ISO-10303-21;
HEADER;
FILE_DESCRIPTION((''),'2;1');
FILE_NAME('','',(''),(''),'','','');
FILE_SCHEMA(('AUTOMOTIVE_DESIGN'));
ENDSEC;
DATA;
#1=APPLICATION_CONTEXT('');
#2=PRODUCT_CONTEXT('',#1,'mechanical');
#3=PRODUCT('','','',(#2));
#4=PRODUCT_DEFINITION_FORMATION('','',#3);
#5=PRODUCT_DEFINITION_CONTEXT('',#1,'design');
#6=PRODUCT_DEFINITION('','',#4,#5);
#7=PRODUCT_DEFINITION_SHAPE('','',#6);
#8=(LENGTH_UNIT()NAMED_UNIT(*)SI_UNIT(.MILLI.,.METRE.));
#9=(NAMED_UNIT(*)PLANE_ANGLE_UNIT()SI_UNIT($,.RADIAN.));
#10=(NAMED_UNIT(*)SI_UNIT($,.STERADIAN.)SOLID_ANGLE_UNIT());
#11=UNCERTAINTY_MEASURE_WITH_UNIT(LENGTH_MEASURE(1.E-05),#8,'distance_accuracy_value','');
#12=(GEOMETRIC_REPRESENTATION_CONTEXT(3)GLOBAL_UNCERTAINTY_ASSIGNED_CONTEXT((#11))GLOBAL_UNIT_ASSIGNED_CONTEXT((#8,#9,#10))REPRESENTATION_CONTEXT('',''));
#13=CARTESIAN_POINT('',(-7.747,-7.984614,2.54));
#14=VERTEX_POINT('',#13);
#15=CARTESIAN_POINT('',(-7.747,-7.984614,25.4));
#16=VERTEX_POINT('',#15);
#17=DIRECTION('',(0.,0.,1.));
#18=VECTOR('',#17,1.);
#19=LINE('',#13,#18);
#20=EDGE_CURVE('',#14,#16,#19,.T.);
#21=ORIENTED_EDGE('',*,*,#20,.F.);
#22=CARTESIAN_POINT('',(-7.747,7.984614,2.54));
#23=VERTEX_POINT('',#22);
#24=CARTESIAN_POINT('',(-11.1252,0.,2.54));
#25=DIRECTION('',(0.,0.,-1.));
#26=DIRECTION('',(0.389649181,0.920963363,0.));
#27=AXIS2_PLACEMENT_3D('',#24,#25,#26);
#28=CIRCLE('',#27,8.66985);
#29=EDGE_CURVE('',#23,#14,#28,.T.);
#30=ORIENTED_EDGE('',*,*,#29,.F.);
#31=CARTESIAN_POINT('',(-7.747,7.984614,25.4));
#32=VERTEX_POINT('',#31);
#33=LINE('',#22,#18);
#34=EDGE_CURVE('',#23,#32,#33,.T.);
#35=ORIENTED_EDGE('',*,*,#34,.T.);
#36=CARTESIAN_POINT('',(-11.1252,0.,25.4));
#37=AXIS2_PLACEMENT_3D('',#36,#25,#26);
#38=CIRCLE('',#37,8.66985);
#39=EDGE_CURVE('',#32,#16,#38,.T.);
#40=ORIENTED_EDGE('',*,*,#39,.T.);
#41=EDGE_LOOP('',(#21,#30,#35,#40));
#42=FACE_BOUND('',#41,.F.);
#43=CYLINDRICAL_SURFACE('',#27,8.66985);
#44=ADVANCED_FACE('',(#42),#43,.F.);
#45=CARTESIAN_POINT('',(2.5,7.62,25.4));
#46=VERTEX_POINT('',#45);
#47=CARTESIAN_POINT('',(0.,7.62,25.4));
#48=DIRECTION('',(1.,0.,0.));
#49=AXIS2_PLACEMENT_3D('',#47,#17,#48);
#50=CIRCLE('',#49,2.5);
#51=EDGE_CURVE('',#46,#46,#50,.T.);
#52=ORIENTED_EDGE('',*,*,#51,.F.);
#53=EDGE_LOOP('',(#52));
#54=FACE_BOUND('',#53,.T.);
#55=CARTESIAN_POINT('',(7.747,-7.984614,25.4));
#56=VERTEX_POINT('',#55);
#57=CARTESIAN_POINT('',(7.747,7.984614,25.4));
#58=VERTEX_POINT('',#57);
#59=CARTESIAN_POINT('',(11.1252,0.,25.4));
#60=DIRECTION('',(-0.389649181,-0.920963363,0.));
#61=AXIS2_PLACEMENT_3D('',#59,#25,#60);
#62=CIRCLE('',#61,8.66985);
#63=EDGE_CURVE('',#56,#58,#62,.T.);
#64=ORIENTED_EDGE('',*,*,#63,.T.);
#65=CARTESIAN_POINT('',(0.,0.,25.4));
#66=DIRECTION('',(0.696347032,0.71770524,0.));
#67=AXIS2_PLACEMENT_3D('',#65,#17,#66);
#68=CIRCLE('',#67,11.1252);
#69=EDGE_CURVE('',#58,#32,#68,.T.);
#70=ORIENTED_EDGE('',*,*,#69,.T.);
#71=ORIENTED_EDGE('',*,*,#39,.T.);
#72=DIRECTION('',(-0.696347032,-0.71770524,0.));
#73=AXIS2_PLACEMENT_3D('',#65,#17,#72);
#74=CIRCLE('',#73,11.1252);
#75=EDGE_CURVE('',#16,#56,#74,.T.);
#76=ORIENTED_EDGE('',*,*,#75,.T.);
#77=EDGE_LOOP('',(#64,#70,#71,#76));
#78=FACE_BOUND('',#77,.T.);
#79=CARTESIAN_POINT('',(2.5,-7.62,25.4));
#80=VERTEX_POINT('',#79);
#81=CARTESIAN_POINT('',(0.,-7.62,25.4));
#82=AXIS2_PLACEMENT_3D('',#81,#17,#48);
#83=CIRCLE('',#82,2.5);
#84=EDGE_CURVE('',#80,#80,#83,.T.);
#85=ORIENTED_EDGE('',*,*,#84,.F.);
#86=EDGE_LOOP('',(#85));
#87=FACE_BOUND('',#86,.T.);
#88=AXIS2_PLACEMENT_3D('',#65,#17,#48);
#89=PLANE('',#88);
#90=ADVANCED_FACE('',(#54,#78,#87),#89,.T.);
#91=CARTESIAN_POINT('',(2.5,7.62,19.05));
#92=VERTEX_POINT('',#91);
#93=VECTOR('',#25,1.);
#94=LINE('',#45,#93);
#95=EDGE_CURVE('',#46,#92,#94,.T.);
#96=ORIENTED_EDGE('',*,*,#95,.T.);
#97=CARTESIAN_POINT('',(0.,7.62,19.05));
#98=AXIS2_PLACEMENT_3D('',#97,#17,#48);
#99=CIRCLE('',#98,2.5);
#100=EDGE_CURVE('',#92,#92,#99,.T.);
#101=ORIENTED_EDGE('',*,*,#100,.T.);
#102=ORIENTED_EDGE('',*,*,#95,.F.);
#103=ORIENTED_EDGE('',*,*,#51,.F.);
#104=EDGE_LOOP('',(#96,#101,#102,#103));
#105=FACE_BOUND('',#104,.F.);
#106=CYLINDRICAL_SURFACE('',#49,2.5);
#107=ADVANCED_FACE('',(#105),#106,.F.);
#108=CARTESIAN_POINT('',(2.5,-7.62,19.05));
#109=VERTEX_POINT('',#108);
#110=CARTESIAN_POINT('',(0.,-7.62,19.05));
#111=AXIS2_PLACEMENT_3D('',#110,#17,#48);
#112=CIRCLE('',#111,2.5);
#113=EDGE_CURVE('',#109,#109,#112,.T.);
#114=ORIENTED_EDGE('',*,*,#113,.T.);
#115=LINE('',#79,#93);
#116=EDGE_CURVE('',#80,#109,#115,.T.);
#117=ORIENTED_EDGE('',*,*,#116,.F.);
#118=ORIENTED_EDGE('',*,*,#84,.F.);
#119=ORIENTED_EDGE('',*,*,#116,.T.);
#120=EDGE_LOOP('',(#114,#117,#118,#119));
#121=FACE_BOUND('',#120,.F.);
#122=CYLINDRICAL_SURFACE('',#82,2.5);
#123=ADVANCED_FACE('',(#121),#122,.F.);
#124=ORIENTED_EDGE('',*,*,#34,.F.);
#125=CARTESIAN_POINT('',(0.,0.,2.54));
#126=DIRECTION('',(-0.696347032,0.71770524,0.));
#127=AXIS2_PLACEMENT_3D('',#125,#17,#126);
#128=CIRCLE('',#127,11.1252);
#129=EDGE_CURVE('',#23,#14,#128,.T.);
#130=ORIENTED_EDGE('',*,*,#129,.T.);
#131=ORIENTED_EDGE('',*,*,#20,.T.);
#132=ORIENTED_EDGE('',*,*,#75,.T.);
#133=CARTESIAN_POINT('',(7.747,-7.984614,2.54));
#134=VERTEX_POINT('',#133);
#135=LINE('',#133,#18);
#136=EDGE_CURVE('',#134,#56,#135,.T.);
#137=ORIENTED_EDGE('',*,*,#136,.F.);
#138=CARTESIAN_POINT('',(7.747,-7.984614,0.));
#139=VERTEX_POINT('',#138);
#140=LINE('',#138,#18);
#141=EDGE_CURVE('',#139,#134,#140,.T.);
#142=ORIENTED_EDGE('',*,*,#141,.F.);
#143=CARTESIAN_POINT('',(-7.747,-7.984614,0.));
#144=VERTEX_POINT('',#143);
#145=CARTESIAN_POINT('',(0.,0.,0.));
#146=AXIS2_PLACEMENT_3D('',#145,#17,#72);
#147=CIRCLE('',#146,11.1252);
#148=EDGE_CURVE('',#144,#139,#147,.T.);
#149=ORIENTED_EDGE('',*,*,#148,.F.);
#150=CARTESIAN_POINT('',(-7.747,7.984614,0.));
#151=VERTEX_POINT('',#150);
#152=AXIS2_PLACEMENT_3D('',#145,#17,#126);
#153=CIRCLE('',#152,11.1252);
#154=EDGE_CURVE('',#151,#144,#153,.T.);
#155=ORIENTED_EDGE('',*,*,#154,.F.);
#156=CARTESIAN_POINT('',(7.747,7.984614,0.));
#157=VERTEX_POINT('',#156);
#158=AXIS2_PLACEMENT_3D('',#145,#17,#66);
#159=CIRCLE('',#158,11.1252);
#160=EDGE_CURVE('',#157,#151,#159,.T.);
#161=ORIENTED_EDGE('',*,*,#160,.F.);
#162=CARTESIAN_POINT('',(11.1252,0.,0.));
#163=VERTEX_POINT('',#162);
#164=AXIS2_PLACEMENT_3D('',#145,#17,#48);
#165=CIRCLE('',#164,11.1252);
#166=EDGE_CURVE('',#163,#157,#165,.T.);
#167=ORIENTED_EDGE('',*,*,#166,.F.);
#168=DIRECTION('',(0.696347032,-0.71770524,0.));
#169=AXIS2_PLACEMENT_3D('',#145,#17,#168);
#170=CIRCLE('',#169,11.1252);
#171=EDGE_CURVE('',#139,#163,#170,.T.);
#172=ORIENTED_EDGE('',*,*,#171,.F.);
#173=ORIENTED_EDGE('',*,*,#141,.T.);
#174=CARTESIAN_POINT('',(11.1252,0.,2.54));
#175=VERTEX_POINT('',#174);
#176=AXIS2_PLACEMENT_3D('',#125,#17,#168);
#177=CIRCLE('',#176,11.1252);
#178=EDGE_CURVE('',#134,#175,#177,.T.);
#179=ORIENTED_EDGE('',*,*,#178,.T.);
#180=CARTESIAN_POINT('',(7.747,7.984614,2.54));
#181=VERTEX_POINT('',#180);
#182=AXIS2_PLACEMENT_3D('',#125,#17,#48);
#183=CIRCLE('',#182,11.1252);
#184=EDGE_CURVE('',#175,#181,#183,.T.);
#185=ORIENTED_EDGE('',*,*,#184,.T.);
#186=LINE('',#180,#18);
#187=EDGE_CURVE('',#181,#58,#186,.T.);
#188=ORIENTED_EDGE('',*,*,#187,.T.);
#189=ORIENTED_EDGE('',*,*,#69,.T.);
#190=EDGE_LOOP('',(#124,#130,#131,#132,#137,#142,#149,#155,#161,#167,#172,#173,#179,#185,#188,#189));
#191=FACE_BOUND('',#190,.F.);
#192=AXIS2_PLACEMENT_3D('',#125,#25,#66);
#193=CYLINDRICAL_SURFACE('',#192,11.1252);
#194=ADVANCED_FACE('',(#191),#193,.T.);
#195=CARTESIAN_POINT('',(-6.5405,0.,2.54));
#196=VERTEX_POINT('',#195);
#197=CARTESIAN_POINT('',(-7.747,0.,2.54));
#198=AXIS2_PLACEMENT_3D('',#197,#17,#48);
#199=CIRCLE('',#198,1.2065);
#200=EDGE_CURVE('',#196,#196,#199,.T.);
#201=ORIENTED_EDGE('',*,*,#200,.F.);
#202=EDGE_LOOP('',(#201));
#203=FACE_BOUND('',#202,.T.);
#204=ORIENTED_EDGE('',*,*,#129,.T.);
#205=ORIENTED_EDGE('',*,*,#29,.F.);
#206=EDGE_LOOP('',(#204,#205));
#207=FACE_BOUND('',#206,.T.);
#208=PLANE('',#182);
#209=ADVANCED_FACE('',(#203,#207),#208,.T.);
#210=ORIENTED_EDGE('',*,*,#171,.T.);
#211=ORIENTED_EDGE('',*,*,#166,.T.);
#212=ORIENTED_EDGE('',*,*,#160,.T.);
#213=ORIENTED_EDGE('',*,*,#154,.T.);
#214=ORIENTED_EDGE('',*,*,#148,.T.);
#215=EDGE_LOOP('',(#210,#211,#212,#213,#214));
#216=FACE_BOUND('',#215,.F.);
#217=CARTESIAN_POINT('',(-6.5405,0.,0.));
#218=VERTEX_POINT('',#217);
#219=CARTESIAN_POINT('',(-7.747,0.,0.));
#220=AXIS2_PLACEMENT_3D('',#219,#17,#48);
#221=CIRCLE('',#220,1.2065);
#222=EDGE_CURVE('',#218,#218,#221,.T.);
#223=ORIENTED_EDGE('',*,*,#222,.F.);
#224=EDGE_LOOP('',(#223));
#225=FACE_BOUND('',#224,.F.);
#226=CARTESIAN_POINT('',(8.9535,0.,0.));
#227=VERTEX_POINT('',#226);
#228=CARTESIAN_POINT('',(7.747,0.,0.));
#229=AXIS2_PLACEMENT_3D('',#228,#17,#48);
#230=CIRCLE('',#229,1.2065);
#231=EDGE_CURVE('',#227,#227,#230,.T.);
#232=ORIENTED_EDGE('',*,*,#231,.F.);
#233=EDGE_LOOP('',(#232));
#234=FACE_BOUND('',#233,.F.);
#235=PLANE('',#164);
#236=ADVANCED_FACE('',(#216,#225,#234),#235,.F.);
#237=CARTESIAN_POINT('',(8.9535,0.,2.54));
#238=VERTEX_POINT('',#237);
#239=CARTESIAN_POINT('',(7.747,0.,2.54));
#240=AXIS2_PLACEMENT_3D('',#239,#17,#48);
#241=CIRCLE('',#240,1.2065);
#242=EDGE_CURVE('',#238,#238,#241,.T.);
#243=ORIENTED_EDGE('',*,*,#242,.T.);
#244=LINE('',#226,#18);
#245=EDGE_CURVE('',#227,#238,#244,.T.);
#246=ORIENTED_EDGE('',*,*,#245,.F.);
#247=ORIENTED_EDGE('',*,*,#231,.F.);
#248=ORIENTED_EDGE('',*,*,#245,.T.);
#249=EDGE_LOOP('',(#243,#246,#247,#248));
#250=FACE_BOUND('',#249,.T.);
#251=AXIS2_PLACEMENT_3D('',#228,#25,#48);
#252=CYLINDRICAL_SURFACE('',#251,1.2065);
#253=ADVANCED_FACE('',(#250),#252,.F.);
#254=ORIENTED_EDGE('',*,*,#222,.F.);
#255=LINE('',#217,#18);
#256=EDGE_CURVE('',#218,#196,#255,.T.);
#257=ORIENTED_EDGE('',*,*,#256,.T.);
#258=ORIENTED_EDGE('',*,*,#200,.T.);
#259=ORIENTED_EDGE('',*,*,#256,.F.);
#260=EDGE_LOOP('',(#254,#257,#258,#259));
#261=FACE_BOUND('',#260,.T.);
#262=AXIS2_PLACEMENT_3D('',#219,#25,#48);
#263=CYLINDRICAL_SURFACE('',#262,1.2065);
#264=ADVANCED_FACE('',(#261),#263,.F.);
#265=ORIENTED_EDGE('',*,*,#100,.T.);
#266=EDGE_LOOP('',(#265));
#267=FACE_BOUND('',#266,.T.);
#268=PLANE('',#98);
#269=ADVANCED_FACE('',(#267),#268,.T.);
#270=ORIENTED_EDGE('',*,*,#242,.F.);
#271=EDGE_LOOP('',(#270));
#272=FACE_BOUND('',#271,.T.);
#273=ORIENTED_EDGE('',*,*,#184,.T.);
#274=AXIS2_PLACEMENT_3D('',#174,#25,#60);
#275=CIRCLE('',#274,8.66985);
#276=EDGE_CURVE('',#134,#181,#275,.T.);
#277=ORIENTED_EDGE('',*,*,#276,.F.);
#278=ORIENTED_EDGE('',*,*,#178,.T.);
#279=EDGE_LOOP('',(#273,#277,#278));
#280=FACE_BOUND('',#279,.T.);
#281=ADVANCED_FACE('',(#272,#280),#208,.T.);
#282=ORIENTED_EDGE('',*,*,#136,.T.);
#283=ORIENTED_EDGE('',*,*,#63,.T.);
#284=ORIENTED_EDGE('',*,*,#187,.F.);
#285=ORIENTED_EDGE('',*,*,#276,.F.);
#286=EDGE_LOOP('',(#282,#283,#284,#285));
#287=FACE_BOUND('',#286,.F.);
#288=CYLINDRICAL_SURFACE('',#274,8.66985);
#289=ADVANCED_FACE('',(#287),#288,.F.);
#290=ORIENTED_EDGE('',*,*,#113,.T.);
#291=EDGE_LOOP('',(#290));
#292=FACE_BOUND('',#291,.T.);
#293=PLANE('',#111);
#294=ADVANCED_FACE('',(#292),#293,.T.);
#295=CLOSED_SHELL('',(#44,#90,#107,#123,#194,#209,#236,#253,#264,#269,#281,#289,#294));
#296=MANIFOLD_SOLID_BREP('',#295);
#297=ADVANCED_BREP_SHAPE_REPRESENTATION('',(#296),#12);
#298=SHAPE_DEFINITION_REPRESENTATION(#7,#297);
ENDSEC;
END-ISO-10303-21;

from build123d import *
from build123d import SkipClean  # not in build123d's __all__

# Parameters (mm, degrees)
F0_R     = 1.2065
F1_DEPTH = 2.54
F3_DEPTH = 22.86
F4_R     = 2.5
F5_DEPTH = 6.35


# Not quite as in the source:
# - a feature names something its author has since deleted; it is built from what else it names


with BuildPart() as f1:
    # F0 (on Top) → F1 (new body)
    with BuildSketch(Plane.XY):
        with BuildLine():
            ThreePointArc((7.747, -7.9846143326), (2.4553498698, 0), (7.747, 7.9846143326))
            ThreePointArc((7.747, 7.9846143326), (0, 11.1252), (-7.747, 7.9846143326))
            ThreePointArc((-7.747, 7.9846143326), (-2.4553498698, 0), (-7.747, -7.9846143326))
            ThreePointArc((-7.747, -7.9846143326), (0, -11.1252), (7.747, -7.9846143326))
        make_face()
        with BuildLine():
            ThreePointArc((-7.747, -7.9846143326), (-2.4553498698, 0), (-7.747, 7.9846143326))
            ThreePointArc((-7.747, 7.9846143326), (-11.1252, 0), (-7.747, -7.9846143326))
        make_face()
        with Locations((-7.747, 0)):
            Circle(F0_R, mode=Mode.SUBTRACT)
        with BuildLine():
            ThreePointArc((7.747, -7.9846143326), (10.245901606, -4.3349250651), (11.1252, 0))
            ThreePointArc((11.1252, 0), (10.245901606, 4.3349250651), (7.747, 7.9846143326))
            ThreePointArc((7.747, 7.9846143326), (2.4553498698, 0), (7.747, -7.9846143326))
        make_face()
        with Locations((7.747, 0)):
            Circle(F0_R, mode=Mode.SUBTRACT)
    extrude(amount=F1_DEPTH)

    # F2 (on face) → F3 (join)
    with BuildSketch(Plane.XY.offset(2.54)):
        with BuildLine():
            ThreePointArc((-7.747, 7.9846143326), (-2.4553498698, 0), (-7.747, -7.9846143326))
            ThreePointArc((-7.747, -7.9846143326), (0, -11.1252), (7.747, -7.9846143326))
            ThreePointArc((7.747, -7.9846143326), (2.4553498698, 0), (7.747, 7.9846143326))
            ThreePointArc((7.747, 7.9846143326), (0, 11.1252), (-7.747, 7.9846143326))
        make_face()
    with SkipClean():  # cleaning this boolean's faces spoils the solid; the shape is the same uncleaned
        extrude(amount=F3_DEPTH)

    # F4 (on face) → F5 (cut)
    with BuildSketch(Plane.XY.offset(25.4)):
        with Locations((0, 7.62)):
            Circle(F4_R)
        with Locations((0, -7.62)):
            Circle(F4_R)
    extrude(amount=-F5_DEPTH, mode=Mode.SUBTRACT)


solid = f1.part
